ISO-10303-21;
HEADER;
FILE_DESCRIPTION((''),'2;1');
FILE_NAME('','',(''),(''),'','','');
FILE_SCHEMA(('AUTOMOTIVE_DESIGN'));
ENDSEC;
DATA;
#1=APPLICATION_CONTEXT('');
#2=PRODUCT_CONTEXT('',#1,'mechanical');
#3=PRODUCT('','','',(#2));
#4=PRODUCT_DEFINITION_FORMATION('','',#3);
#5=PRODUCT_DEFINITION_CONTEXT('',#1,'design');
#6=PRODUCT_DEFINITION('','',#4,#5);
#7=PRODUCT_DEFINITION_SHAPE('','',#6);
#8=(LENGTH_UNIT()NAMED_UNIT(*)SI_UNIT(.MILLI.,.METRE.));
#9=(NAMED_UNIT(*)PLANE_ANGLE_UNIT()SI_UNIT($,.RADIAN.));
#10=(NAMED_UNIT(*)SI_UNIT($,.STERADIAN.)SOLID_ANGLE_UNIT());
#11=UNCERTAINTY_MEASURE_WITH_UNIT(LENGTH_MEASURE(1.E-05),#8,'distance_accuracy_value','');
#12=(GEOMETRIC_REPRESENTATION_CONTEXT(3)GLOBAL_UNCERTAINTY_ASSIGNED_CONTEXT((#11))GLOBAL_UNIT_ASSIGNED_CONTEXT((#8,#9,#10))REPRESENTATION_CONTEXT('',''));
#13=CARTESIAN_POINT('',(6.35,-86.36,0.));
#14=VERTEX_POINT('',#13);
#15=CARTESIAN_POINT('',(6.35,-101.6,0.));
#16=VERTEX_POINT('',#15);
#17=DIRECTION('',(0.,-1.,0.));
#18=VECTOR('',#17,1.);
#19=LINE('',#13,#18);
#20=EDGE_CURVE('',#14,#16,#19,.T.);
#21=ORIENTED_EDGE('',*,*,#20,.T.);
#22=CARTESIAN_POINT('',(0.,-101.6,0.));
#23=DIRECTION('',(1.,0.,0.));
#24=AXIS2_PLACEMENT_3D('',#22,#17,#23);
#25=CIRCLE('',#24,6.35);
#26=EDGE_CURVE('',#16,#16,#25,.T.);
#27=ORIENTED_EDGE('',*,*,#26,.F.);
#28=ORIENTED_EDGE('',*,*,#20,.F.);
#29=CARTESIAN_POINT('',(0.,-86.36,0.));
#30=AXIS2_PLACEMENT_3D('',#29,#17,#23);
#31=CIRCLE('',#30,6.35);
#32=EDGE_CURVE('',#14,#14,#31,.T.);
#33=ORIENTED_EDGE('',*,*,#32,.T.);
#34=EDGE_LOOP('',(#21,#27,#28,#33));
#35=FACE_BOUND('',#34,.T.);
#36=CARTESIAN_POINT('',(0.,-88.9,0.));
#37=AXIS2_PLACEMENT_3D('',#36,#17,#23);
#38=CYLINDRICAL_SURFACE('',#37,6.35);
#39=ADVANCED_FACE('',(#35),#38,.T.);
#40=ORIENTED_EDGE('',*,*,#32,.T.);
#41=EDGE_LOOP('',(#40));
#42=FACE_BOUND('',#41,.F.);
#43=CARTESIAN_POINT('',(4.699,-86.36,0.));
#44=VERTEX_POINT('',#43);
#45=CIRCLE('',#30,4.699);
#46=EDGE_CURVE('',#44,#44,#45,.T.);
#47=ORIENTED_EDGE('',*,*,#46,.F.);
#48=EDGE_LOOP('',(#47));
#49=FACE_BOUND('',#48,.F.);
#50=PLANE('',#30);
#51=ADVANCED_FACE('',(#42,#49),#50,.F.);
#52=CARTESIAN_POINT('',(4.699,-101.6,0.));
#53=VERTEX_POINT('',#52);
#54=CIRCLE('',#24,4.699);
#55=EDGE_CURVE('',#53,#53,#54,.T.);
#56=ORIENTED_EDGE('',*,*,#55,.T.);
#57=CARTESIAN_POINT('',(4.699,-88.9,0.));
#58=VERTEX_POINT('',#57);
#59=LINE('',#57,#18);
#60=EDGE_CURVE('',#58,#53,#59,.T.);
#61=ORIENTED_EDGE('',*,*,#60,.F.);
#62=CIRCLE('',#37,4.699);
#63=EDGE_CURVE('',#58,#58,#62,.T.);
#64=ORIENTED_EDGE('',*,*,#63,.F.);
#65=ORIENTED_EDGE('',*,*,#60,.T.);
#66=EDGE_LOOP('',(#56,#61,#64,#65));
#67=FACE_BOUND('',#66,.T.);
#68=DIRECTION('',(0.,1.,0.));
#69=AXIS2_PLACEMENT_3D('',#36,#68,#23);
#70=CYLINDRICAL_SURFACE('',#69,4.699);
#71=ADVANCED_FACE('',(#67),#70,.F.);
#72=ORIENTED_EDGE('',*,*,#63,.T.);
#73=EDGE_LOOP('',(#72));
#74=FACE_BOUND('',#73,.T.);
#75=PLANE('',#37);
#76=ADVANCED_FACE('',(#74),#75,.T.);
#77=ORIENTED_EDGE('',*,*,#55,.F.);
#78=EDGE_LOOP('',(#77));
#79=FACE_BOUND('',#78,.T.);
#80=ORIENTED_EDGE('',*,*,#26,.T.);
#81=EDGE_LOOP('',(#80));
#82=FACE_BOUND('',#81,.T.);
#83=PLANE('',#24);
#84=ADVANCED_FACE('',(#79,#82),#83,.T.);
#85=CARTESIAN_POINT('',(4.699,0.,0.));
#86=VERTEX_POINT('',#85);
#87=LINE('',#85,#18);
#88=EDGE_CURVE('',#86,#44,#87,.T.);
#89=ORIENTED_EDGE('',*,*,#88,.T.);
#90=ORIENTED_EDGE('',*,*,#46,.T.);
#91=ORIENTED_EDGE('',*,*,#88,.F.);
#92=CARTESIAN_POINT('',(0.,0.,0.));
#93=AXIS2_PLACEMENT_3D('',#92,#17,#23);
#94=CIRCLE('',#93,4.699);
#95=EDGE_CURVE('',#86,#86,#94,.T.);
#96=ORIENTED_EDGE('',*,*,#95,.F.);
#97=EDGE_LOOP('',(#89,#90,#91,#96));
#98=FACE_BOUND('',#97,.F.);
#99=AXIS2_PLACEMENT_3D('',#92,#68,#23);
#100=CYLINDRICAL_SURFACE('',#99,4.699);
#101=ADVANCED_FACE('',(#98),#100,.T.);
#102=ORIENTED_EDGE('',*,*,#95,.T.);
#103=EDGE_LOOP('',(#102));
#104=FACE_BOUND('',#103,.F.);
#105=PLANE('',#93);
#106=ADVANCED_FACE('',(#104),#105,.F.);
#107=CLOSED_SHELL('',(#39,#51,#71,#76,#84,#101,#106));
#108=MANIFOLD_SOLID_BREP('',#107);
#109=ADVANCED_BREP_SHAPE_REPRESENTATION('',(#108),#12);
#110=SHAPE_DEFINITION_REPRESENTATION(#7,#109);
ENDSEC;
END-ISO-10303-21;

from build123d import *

# Parameters (mm, degrees)
F0_R     = 4.699
F1_DEPTH = 88.9
F2_R     = 6.35
F2_R_2   = 4.699
F3_DEPTH = 12.7
F4_DEPTH = 2.54


with BuildPart() as f1:
    # F0 (on Front) → F1 (new body)
    with BuildSketch(Plane.XZ):
        Circle(F0_R)
    extrude(amount=F1_DEPTH)

    # F2 (on face) → F3 (join)
    with BuildSketch(Plane.XZ.offset(88.9)):
        Circle(F2_R)
        Circle(F2_R_2, mode=Mode.SUBTRACT)
    extrude(amount=F3_DEPTH)

    # F4 (add): a face of the model
    f4_faces = [f1.faces().sort_by_distance(p)[0] for p in [
        (-6.1703948776, -88.9, 0),
    ]]
    extrude(f4_faces, amount=F4_DEPTH)


solid = f1.part
